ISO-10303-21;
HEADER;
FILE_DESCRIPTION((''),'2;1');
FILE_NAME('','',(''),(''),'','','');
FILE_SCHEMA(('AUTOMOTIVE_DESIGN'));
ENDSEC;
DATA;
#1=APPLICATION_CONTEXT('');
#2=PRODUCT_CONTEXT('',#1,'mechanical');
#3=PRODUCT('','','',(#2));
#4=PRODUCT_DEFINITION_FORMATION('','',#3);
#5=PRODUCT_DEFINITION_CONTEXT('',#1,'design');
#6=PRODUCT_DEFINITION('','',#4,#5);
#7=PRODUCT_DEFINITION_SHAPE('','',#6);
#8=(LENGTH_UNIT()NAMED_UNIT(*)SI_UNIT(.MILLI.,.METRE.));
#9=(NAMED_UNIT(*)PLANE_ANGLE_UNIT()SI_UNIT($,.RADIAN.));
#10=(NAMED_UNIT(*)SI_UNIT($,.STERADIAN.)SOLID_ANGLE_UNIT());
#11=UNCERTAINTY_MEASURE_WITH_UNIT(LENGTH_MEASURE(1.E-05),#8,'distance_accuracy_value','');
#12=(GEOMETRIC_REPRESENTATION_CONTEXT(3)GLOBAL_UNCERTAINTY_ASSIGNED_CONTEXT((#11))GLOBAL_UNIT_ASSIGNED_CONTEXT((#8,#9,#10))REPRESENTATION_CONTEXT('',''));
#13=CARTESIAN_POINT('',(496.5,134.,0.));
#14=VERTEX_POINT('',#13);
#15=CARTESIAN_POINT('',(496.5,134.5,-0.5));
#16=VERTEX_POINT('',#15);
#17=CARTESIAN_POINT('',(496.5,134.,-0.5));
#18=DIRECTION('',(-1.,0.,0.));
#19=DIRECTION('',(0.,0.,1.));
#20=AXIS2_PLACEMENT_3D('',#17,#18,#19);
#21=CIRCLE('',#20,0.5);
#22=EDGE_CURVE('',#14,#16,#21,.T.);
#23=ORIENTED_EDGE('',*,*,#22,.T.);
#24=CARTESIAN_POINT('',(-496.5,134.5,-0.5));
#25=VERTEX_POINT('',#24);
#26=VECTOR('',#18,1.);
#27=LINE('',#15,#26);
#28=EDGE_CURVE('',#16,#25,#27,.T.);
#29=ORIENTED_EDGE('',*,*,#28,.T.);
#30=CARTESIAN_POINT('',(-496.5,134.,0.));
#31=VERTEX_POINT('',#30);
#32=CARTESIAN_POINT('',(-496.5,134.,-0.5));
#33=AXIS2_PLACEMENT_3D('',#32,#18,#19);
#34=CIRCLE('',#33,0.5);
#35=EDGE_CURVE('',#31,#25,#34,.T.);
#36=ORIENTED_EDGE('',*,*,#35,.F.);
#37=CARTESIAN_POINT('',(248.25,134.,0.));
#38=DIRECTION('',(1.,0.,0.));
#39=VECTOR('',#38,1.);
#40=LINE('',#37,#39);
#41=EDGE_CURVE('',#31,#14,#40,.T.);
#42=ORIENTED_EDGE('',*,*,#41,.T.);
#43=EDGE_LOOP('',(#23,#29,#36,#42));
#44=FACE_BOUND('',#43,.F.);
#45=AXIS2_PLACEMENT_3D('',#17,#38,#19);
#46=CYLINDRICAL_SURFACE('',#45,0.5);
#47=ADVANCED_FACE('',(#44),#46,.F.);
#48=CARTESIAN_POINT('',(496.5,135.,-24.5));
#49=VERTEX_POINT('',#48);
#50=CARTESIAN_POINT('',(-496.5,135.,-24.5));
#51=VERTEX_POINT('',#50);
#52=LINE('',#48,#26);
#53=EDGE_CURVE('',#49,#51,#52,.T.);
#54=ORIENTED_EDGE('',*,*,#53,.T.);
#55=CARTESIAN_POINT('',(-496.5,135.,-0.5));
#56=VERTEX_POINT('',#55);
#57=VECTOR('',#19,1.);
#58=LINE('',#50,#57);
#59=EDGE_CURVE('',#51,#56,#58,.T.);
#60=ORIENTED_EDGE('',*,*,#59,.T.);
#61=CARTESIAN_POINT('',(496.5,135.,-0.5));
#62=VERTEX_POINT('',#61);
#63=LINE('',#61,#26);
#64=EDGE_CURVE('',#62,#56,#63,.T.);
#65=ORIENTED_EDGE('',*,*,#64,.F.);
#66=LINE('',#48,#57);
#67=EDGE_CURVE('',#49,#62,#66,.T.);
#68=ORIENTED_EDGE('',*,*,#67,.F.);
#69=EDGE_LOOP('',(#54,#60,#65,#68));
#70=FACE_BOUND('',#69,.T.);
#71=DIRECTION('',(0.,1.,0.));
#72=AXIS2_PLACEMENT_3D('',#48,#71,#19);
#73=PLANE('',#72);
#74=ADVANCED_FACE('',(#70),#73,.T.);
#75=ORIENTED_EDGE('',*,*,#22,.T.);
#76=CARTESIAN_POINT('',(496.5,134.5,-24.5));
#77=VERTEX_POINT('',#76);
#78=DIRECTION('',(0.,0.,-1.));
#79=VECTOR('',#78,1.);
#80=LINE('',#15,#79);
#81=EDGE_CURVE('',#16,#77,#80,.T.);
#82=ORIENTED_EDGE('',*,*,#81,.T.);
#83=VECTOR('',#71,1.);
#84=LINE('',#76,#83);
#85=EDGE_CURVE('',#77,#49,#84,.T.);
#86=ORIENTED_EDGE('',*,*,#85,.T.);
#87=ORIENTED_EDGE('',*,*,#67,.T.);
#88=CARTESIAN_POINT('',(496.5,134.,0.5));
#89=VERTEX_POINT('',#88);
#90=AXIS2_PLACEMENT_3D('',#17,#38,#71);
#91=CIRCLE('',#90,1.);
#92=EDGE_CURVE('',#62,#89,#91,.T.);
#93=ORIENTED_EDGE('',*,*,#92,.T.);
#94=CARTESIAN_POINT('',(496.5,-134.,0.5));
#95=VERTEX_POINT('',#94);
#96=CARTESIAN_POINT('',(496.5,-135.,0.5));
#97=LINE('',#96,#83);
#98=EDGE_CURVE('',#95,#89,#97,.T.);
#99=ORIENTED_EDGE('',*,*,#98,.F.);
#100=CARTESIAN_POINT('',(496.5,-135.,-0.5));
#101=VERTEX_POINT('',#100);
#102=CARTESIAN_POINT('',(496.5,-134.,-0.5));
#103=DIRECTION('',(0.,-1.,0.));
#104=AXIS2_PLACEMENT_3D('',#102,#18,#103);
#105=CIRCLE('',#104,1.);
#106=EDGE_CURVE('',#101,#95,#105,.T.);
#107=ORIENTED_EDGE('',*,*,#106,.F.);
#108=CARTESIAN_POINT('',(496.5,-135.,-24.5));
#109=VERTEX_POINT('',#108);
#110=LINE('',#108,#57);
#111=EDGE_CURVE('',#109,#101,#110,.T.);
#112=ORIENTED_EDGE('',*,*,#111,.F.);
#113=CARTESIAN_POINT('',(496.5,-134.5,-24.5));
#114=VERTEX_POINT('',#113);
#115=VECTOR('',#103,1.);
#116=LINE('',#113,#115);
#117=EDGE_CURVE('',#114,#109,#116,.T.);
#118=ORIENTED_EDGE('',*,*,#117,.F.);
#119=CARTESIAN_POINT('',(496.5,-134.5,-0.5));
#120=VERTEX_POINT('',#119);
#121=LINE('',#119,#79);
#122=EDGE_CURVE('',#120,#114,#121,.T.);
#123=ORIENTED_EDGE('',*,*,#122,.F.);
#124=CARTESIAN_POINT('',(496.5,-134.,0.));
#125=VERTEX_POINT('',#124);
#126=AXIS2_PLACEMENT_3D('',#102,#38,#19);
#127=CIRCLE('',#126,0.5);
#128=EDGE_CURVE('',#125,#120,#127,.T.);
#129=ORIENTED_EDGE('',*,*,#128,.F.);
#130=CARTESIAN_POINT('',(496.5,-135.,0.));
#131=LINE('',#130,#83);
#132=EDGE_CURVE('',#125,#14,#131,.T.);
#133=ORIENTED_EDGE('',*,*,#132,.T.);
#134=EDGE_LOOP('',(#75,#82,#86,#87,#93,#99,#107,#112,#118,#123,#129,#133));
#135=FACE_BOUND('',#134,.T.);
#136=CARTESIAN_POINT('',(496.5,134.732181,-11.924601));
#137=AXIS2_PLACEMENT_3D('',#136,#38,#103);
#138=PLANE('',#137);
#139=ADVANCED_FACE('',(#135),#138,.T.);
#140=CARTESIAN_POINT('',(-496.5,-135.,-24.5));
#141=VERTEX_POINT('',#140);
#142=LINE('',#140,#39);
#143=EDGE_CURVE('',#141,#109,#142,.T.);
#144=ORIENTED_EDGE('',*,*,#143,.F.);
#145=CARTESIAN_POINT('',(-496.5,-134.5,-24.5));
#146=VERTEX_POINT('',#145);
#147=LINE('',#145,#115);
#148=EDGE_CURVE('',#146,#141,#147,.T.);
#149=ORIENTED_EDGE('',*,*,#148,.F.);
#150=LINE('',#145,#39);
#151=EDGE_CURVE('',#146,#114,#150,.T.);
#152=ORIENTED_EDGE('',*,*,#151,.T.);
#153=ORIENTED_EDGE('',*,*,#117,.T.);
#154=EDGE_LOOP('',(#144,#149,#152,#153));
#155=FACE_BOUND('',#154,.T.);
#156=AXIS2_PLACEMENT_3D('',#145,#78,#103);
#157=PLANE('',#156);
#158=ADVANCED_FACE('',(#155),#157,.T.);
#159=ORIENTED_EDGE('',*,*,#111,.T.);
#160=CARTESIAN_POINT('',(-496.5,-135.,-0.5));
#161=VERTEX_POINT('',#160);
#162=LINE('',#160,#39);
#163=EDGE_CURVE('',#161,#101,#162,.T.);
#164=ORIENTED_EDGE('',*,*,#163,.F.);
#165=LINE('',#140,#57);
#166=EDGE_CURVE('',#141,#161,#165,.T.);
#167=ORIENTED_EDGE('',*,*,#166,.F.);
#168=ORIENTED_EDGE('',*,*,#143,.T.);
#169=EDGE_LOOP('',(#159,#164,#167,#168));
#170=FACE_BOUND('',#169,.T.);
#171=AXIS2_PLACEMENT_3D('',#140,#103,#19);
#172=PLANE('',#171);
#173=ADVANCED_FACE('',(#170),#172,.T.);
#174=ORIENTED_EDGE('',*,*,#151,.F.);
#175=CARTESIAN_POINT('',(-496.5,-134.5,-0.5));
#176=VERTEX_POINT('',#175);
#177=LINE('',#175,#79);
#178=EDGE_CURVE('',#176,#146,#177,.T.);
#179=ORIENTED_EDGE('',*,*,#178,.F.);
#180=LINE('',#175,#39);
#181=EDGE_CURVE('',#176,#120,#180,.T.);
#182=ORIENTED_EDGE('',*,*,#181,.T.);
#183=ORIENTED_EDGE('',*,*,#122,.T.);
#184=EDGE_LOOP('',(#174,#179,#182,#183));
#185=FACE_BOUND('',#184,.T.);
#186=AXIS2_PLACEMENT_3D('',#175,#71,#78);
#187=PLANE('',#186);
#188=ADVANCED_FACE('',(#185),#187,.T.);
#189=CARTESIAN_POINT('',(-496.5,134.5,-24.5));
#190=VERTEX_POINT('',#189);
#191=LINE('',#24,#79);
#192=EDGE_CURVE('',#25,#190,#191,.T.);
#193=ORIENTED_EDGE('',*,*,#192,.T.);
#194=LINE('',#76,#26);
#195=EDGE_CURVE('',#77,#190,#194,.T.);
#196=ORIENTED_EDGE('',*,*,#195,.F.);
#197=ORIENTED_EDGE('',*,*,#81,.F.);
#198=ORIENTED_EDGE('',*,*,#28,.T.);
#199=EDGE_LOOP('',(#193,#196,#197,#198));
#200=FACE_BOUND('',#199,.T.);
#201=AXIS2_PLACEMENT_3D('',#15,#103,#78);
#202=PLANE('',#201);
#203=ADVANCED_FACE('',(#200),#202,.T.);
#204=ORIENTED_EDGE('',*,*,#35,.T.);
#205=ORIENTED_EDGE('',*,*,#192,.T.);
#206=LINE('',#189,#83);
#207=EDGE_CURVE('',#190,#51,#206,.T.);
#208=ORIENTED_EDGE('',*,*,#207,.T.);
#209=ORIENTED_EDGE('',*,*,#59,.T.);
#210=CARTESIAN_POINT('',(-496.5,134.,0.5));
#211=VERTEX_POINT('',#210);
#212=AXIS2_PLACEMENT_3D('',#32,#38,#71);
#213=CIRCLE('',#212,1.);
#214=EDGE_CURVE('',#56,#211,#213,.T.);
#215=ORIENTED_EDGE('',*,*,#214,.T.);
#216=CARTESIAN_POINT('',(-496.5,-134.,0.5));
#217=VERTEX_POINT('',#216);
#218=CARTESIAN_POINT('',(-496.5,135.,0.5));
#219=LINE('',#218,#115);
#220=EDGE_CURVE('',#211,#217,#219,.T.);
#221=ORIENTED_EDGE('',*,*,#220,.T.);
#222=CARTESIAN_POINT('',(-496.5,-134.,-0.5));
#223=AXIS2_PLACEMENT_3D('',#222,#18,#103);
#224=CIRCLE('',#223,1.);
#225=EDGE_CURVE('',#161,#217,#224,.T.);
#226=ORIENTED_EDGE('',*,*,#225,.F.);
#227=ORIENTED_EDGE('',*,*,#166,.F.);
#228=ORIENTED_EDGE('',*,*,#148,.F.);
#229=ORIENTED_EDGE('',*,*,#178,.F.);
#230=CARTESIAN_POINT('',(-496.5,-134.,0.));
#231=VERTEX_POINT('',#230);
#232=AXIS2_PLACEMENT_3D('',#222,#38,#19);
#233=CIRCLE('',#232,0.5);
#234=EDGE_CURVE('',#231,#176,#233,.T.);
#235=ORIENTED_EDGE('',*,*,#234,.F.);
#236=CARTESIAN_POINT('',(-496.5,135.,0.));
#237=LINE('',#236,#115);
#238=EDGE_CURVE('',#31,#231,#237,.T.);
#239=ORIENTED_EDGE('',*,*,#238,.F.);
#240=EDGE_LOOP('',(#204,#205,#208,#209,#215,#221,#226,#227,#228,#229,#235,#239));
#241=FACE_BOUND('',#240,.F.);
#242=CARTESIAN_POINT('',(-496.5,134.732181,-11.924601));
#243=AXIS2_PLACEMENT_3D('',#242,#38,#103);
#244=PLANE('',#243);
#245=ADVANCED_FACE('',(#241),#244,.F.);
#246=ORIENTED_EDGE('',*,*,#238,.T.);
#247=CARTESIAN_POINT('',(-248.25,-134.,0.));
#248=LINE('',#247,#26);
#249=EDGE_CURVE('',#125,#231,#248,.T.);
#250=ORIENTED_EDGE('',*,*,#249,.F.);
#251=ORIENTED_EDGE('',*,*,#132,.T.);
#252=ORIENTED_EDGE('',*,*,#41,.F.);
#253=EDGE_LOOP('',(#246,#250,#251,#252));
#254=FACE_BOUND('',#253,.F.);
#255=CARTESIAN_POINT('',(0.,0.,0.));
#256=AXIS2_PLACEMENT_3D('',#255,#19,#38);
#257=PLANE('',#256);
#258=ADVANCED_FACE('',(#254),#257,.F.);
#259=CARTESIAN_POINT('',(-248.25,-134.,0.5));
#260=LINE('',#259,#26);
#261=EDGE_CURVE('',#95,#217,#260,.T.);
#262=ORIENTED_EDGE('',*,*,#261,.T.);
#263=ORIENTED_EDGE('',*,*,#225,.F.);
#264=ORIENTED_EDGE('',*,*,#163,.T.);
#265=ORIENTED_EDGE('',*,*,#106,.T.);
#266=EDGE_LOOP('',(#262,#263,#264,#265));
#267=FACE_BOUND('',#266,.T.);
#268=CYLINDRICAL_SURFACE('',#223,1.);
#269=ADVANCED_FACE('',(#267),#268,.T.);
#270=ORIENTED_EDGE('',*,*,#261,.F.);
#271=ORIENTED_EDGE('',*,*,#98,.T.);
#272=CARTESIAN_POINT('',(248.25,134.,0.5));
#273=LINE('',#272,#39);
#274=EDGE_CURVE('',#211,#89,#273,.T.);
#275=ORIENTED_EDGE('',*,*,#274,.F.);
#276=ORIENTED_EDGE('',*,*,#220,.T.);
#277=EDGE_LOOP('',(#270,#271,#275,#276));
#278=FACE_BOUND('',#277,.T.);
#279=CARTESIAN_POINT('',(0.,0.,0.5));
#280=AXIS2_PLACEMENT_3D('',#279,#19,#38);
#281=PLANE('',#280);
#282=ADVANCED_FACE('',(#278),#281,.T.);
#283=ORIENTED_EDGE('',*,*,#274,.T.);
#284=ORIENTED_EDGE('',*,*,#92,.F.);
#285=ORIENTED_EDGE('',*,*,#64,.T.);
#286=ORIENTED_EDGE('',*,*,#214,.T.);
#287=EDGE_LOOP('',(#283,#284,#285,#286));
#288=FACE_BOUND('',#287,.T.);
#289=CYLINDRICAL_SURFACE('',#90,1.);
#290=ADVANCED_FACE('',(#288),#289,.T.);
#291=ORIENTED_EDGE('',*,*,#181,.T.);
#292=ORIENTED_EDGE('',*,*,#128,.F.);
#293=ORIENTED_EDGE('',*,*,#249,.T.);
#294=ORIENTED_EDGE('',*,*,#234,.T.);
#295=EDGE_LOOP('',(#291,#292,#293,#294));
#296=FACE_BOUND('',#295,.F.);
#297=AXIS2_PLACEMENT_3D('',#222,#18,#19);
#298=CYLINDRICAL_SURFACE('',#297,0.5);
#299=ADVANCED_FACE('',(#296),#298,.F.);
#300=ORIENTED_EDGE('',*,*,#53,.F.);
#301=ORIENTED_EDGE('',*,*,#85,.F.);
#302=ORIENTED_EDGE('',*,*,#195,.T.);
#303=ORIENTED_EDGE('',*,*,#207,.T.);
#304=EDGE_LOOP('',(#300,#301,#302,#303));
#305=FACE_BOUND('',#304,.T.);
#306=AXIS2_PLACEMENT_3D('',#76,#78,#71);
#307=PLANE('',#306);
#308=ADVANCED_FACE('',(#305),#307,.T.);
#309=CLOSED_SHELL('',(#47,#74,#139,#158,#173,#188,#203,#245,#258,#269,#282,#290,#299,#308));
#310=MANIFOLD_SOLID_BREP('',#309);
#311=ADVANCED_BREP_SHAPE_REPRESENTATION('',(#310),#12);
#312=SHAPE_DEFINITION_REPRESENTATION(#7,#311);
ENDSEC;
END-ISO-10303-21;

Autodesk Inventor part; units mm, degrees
ref_plane "YZ Plane" through (0, 0, 0) normal (1, 0, 0) x (0, 1, 0)
ref_plane "XZ Plane" through (0, 0, 0) normal (0, 1, 0) x (-1, 0, 0)
ref_plane "XY Plane" through (0, 0, 0) normal (0, 0, 1) x (1, 0, 0)
sketch "Sketch1" plane through (0, 0, 0) normal (0, 0, 1) x (1, 0, 0)
  line L0 (-496.5, -135) -> (496.5, -135)
  line L1 (496.5, -135) -> (496.5, 135)
  line L2 (496.5, 135) -> (-496.5, 135)
  line L3 (-496.5, 135) -> (-496.5, -135)
  line L4 (-496.5, -135) -> (496.5, 135) construction
  line L5 (496.5, -135) -> (-496.5, 135) construction
  point P0 (0, 0)
  dimension "d0" = 993
  dimension "d1" = 270
extrude "Plate1" add sketch "Sketch1" along normal blind 0.5
sketch "Sketch2" plane through (496.5, 134.5, 0.5) normal (0, 1, 0) x (-1, 0, 0)
  line L0 (993, 0) -> (0, 0)
  line L1 (0, 0) -> (0, -25)
  line L2 (0, -25) -> (993, -25)
  line L3 (993, -25) -> (993, 0)
edge flange "Flange1" height 25 angle 90 thickness 0.5 bend radius 0.5 thickness toward (0, 1, 0) relief tear relief width 0.5 relief depth 0.25 corner gap 0.5 corner form 0 edges at (0, 135, 0) (0, -135, 0) wall of the first edge with corners at (-496.5, 134.5, 0.5) (496.5, 134.5, 0.5) (496.5, 134.5, -24.5) (-496.5, 134.5, -24.5)
bend "Bend1"
corner "Corner1"
equation "\"d2\" = Thickness"
equation "\"d3\" = BendReliefWidth"
equation "\"d4\" = BendReliefDepth"
equation "\"d5\" = MinimumRemnant"
equation "\"d6\" = TransitionRadius"
equation "\"d9\" = BendRadius"
equation "\"d10\" = CornerReliefSize"
equation "\"d11\" = GapSize"
equation "\"d12\" = JacobiRadiusSize"
equation "\"BendRadius\" = Thickness"
equation "\"BendReliefWidth\" = Thickness"
equation "\"BendReliefDepth\" = 0.5 * Thickness"
equation "\"CornerReliefSize\" = 4 * Thickness"
equation "\"MinimumRemnant\" = 2 * Thickness"
equation "\"TransitionRadius\" = BendRadius"
equation "\"JacobiRadiusSize\" = BendRadius"
equation "\"GapSize\" = Thickness"
equation "\"Space5\" = 0"
equation "\"Space6\" = 0"
equation "\"Space7\" = 0"
equation "\"Thickness\" = 0.5"
properties part number "Acoplador_de_Cuentas"
